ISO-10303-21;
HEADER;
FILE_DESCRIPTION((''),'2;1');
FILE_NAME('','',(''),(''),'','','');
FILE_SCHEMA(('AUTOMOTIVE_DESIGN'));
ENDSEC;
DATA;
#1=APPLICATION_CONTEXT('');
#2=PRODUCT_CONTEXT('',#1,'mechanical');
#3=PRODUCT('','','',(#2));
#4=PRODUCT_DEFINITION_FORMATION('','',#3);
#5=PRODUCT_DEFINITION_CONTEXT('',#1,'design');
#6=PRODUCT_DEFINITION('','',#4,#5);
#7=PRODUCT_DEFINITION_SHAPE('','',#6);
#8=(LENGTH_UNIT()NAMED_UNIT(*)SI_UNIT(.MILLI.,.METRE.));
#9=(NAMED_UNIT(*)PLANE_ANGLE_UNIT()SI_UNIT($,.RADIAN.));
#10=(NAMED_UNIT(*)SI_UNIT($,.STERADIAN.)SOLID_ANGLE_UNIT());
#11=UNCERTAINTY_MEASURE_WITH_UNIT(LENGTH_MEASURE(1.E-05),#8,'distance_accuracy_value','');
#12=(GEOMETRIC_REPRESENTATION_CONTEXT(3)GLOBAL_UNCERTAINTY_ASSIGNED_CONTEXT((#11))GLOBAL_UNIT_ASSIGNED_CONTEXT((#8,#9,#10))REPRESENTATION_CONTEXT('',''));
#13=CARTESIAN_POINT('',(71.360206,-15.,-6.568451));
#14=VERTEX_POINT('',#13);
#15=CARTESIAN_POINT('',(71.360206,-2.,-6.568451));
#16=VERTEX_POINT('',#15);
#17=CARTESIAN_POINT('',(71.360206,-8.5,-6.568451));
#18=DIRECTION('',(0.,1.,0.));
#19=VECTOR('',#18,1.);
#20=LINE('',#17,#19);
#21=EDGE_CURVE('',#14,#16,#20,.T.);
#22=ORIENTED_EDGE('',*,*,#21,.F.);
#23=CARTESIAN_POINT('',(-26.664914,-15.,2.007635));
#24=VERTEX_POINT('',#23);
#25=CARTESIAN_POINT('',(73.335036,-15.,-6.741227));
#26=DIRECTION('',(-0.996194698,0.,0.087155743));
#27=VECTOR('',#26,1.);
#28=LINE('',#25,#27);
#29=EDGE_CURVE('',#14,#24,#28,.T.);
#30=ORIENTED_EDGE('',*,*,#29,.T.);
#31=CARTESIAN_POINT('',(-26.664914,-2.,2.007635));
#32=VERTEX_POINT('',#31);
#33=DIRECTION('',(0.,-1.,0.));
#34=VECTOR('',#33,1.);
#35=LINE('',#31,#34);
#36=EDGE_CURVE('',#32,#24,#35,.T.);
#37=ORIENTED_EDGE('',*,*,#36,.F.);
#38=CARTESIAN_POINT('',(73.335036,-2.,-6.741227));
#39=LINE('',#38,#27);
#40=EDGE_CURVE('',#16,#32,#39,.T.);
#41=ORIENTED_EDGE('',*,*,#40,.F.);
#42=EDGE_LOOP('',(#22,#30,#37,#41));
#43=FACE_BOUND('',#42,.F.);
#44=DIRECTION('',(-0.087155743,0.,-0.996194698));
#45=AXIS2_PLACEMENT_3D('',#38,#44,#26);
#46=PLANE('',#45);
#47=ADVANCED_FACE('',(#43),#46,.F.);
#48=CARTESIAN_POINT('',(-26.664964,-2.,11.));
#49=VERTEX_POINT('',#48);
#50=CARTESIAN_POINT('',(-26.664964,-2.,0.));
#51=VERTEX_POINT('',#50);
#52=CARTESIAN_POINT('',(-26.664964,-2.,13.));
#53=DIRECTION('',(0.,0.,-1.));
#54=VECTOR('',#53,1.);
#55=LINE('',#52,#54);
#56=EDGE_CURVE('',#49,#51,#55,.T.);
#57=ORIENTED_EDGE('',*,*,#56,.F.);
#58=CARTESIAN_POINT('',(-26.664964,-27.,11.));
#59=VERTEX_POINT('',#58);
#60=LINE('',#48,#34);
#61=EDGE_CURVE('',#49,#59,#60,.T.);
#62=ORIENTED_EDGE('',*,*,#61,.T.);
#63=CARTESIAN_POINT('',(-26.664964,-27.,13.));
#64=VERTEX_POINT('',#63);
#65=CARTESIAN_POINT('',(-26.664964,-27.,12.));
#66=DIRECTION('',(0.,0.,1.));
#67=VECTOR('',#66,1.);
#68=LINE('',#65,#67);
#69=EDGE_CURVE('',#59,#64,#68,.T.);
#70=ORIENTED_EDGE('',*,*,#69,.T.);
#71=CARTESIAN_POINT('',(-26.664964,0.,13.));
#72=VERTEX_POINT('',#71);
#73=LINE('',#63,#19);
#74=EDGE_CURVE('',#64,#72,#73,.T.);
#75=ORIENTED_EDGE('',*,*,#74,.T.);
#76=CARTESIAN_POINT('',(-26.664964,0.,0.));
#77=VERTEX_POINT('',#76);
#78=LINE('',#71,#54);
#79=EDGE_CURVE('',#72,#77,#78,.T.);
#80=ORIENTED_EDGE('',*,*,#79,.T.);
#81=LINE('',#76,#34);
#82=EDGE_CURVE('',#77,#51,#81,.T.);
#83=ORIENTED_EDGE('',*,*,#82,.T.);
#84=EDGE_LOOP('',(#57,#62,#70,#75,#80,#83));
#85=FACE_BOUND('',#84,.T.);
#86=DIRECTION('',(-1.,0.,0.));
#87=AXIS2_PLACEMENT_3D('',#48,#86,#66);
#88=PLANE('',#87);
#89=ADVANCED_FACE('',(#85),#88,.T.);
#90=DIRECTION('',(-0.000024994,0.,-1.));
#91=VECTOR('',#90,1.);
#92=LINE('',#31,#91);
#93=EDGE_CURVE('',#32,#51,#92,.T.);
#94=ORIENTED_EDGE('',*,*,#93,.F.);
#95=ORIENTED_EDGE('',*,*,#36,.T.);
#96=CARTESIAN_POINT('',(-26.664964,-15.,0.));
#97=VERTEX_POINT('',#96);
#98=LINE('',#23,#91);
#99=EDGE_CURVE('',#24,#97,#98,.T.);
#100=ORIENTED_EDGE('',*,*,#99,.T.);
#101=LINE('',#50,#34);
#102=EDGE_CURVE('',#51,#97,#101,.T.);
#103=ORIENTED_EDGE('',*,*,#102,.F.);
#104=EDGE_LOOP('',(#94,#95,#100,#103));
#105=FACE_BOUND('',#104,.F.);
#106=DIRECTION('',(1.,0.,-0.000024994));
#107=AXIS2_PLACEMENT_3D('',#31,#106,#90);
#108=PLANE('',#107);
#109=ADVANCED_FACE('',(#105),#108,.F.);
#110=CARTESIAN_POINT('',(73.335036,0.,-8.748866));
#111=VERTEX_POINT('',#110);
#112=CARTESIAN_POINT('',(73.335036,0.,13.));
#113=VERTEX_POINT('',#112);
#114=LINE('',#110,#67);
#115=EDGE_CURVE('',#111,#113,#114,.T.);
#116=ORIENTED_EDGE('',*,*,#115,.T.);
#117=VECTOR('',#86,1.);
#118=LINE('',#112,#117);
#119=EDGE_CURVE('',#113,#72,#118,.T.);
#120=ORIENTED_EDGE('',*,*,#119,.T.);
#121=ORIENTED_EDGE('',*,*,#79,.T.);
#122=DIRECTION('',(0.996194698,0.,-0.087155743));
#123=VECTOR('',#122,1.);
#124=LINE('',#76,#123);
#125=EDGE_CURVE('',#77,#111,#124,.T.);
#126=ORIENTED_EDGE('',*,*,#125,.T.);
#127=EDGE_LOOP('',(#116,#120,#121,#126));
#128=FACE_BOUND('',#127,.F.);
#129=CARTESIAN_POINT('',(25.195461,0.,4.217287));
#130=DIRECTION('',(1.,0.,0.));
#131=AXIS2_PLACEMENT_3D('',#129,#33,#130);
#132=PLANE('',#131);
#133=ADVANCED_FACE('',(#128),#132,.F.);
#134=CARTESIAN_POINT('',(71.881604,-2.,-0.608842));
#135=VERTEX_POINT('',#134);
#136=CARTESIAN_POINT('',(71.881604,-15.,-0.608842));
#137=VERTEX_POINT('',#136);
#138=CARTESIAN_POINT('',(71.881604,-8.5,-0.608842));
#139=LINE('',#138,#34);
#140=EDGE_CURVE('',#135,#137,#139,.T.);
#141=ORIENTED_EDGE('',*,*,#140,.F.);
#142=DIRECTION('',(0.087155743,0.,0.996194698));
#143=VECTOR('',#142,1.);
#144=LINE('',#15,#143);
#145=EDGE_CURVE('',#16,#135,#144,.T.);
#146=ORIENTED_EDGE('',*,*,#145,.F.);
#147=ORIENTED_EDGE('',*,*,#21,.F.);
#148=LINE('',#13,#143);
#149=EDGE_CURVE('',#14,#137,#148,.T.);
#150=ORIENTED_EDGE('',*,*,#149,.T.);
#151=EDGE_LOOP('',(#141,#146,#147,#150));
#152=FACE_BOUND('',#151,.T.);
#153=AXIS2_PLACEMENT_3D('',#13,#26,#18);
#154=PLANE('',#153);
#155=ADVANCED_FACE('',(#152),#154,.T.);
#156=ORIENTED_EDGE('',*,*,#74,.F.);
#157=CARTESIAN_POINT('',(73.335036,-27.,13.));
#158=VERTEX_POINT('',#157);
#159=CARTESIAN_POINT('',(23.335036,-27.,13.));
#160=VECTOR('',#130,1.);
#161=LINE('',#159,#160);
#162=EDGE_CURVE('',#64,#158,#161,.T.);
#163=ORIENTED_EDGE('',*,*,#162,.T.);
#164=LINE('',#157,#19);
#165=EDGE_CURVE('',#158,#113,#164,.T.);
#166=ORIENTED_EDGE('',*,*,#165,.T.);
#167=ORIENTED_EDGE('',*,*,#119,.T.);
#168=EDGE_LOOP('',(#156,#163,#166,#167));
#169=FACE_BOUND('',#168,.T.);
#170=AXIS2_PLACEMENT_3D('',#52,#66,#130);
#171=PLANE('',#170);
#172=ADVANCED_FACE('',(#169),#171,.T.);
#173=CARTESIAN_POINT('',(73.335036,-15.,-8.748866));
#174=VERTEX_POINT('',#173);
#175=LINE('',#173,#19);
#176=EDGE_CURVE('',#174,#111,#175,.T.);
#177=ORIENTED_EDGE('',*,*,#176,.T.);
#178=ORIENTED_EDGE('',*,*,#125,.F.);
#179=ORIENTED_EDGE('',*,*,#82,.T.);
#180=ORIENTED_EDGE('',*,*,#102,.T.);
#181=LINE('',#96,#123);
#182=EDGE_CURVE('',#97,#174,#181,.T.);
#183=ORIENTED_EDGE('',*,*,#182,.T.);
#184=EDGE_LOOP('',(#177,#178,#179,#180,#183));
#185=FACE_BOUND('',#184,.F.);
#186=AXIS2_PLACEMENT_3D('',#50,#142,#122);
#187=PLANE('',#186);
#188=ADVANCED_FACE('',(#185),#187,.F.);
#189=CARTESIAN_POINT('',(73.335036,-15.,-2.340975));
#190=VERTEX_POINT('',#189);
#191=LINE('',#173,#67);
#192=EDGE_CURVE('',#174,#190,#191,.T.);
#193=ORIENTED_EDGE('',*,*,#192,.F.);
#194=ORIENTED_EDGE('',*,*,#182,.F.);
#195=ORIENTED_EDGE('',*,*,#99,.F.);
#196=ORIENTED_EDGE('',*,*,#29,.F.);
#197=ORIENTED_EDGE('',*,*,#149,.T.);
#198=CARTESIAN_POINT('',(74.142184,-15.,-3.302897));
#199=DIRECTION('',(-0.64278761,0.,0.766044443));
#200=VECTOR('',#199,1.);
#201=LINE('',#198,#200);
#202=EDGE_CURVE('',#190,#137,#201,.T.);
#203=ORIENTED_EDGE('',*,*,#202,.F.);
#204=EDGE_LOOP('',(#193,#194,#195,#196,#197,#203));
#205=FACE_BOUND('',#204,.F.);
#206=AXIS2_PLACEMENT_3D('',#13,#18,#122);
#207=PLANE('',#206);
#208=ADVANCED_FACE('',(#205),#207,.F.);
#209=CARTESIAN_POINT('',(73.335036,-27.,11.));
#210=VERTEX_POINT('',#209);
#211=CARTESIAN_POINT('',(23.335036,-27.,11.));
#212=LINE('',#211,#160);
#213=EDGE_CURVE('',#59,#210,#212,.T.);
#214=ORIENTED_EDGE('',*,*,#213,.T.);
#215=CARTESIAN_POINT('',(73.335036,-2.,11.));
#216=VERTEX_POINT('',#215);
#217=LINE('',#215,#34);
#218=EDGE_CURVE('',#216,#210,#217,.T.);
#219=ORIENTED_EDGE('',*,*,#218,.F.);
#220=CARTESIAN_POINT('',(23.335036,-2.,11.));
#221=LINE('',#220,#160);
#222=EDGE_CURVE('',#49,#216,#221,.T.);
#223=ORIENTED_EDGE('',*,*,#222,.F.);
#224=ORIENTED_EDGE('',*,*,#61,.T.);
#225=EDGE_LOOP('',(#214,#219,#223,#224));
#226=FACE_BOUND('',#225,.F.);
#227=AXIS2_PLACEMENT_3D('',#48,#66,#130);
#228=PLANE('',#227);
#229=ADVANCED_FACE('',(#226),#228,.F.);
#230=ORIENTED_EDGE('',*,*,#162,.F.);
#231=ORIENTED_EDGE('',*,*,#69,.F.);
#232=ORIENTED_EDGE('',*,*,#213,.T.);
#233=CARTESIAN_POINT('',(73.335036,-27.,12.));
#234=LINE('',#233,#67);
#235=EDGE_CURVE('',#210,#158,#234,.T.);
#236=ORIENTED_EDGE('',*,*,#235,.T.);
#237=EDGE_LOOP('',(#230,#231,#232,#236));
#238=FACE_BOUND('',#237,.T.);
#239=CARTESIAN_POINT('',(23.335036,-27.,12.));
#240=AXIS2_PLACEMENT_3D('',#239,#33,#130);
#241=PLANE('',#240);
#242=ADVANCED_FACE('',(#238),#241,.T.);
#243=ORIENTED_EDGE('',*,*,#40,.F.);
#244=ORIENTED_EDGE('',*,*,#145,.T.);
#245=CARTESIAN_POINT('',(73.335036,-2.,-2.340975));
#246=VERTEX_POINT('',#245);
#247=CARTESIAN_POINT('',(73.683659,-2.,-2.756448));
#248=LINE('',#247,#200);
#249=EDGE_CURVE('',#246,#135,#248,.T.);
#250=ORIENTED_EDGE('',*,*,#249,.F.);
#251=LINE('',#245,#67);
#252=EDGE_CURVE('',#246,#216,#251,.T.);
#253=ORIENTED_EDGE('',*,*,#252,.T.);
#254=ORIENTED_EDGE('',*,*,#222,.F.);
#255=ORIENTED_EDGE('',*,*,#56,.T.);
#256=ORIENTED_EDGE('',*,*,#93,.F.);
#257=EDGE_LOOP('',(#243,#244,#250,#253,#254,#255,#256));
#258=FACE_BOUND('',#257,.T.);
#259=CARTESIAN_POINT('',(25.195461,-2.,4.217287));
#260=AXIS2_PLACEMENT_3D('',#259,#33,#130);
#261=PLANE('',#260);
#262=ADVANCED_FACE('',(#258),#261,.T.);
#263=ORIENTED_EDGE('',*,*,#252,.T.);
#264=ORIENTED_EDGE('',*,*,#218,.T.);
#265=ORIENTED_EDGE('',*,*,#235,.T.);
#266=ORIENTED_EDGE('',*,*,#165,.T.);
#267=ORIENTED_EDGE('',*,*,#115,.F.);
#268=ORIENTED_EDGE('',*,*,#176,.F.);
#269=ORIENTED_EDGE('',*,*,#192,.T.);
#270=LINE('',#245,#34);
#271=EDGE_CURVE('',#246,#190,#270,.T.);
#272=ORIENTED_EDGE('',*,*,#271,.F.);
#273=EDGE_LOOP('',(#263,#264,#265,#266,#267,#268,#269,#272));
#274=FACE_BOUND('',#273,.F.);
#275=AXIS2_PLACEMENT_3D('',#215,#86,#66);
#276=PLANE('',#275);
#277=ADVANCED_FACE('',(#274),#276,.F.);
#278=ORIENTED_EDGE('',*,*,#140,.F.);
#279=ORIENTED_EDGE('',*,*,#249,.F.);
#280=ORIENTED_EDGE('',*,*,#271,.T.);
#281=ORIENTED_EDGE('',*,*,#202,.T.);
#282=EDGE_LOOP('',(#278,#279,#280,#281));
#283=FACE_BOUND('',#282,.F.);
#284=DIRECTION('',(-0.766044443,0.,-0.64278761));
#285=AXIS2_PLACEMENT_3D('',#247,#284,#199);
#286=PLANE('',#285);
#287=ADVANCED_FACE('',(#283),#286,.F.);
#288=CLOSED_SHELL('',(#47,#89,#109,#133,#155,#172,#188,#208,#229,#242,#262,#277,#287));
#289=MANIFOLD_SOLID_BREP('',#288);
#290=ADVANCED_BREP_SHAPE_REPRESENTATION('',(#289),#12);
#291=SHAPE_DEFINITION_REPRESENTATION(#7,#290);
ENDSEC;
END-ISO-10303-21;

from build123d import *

# Parameters (mm, degrees)
F1_DEPTH    = 2
F3_DEPTH    = 13
F2_W        = 100
F2_H        = 2
F4_DEPTH    = 25
F5_W        = 1.9823738266
F5_H        = 13
F6_DEPTH    = 6
F7_T1_DEPTH = 18.1433659759
F9_DEPTH    = 25


# Not quite as in the source:
# - a fillet or chamfer that OpenCascade refuses, or shapes differently, is made with other operations: its cross-section is extruded or revolved along the edge and cut away or added


with BuildPart() as f1:
    # F0 (on Front) → F1 (new body)
    with BuildSketch(Plane.XZ):
        Polygon((-26.6649637938, 13), (-26.6649637938, 0), (73.3350362062, -8.7488663526), (73.3350362062, 13), align=None)
    extrude(amount=F1_DEPTH)

    # F2 (on face) → F3 (join)
    with BuildSketch(Plane.XZ.offset(2)):
        Polygon((73.3350362062, -6.7412266775), (-26.6649136147, 2.007635285), (-26.6649637938, 0), (73.3350362062, -8.7488663526), align=None)
    extrude(amount=F3_DEPTH)

    # F2 (on face) → F4 (join)
    with BuildSketch(Plane.XZ.offset(2)):
        with Locations((23.3350362062, 12)):
            Rectangle(F2_W, F2_H)
    extrude(amount=F4_DEPTH)

    # F5 (on face) → F6 (join)
    with BuildSketch(Plane(origin=(-0.0282388724, 0, -0.322771789), x_dir=(0.9961946981, 0, -0.0871557427), z_dir=(0.0871557427, 0, 0.9961946981))):
        with Locations((72.6523239577, -8.5)):
            Rectangle(F5_W, F5_H)
    extrude(amount=F6_DEPTH)

    # F7: chamfer of 2 on 1 edges, made by hand

    # F7_s2 → F7_t1 (cut)
    with BuildSketch(Plane.XZ.offset(2)):
        Polygon((73.6836591771, -2.7564478851), (71.8655812665, -0.5897470035), (73.8579706626, -0.764058489), align=None)
    extrude(amount=F7_T1_DEPTH, mode=Mode.SUBTRACT)

    # F8 (on face) → F9 (cut)
    with BuildSketch(Plane(origin=(0, -2, 0), x_dir=(-1, 0, 0), z_dir=(0, 1, 0))):
        Polygon((-73.6836591771, -2.7564478851), (-73.3350362062, -6.7412266775), (-73.3350362062, -2.340975207), align=None)
    extrude(amount=-F9_DEPTH, mode=Mode.SUBTRACT)


solid = f1.part
